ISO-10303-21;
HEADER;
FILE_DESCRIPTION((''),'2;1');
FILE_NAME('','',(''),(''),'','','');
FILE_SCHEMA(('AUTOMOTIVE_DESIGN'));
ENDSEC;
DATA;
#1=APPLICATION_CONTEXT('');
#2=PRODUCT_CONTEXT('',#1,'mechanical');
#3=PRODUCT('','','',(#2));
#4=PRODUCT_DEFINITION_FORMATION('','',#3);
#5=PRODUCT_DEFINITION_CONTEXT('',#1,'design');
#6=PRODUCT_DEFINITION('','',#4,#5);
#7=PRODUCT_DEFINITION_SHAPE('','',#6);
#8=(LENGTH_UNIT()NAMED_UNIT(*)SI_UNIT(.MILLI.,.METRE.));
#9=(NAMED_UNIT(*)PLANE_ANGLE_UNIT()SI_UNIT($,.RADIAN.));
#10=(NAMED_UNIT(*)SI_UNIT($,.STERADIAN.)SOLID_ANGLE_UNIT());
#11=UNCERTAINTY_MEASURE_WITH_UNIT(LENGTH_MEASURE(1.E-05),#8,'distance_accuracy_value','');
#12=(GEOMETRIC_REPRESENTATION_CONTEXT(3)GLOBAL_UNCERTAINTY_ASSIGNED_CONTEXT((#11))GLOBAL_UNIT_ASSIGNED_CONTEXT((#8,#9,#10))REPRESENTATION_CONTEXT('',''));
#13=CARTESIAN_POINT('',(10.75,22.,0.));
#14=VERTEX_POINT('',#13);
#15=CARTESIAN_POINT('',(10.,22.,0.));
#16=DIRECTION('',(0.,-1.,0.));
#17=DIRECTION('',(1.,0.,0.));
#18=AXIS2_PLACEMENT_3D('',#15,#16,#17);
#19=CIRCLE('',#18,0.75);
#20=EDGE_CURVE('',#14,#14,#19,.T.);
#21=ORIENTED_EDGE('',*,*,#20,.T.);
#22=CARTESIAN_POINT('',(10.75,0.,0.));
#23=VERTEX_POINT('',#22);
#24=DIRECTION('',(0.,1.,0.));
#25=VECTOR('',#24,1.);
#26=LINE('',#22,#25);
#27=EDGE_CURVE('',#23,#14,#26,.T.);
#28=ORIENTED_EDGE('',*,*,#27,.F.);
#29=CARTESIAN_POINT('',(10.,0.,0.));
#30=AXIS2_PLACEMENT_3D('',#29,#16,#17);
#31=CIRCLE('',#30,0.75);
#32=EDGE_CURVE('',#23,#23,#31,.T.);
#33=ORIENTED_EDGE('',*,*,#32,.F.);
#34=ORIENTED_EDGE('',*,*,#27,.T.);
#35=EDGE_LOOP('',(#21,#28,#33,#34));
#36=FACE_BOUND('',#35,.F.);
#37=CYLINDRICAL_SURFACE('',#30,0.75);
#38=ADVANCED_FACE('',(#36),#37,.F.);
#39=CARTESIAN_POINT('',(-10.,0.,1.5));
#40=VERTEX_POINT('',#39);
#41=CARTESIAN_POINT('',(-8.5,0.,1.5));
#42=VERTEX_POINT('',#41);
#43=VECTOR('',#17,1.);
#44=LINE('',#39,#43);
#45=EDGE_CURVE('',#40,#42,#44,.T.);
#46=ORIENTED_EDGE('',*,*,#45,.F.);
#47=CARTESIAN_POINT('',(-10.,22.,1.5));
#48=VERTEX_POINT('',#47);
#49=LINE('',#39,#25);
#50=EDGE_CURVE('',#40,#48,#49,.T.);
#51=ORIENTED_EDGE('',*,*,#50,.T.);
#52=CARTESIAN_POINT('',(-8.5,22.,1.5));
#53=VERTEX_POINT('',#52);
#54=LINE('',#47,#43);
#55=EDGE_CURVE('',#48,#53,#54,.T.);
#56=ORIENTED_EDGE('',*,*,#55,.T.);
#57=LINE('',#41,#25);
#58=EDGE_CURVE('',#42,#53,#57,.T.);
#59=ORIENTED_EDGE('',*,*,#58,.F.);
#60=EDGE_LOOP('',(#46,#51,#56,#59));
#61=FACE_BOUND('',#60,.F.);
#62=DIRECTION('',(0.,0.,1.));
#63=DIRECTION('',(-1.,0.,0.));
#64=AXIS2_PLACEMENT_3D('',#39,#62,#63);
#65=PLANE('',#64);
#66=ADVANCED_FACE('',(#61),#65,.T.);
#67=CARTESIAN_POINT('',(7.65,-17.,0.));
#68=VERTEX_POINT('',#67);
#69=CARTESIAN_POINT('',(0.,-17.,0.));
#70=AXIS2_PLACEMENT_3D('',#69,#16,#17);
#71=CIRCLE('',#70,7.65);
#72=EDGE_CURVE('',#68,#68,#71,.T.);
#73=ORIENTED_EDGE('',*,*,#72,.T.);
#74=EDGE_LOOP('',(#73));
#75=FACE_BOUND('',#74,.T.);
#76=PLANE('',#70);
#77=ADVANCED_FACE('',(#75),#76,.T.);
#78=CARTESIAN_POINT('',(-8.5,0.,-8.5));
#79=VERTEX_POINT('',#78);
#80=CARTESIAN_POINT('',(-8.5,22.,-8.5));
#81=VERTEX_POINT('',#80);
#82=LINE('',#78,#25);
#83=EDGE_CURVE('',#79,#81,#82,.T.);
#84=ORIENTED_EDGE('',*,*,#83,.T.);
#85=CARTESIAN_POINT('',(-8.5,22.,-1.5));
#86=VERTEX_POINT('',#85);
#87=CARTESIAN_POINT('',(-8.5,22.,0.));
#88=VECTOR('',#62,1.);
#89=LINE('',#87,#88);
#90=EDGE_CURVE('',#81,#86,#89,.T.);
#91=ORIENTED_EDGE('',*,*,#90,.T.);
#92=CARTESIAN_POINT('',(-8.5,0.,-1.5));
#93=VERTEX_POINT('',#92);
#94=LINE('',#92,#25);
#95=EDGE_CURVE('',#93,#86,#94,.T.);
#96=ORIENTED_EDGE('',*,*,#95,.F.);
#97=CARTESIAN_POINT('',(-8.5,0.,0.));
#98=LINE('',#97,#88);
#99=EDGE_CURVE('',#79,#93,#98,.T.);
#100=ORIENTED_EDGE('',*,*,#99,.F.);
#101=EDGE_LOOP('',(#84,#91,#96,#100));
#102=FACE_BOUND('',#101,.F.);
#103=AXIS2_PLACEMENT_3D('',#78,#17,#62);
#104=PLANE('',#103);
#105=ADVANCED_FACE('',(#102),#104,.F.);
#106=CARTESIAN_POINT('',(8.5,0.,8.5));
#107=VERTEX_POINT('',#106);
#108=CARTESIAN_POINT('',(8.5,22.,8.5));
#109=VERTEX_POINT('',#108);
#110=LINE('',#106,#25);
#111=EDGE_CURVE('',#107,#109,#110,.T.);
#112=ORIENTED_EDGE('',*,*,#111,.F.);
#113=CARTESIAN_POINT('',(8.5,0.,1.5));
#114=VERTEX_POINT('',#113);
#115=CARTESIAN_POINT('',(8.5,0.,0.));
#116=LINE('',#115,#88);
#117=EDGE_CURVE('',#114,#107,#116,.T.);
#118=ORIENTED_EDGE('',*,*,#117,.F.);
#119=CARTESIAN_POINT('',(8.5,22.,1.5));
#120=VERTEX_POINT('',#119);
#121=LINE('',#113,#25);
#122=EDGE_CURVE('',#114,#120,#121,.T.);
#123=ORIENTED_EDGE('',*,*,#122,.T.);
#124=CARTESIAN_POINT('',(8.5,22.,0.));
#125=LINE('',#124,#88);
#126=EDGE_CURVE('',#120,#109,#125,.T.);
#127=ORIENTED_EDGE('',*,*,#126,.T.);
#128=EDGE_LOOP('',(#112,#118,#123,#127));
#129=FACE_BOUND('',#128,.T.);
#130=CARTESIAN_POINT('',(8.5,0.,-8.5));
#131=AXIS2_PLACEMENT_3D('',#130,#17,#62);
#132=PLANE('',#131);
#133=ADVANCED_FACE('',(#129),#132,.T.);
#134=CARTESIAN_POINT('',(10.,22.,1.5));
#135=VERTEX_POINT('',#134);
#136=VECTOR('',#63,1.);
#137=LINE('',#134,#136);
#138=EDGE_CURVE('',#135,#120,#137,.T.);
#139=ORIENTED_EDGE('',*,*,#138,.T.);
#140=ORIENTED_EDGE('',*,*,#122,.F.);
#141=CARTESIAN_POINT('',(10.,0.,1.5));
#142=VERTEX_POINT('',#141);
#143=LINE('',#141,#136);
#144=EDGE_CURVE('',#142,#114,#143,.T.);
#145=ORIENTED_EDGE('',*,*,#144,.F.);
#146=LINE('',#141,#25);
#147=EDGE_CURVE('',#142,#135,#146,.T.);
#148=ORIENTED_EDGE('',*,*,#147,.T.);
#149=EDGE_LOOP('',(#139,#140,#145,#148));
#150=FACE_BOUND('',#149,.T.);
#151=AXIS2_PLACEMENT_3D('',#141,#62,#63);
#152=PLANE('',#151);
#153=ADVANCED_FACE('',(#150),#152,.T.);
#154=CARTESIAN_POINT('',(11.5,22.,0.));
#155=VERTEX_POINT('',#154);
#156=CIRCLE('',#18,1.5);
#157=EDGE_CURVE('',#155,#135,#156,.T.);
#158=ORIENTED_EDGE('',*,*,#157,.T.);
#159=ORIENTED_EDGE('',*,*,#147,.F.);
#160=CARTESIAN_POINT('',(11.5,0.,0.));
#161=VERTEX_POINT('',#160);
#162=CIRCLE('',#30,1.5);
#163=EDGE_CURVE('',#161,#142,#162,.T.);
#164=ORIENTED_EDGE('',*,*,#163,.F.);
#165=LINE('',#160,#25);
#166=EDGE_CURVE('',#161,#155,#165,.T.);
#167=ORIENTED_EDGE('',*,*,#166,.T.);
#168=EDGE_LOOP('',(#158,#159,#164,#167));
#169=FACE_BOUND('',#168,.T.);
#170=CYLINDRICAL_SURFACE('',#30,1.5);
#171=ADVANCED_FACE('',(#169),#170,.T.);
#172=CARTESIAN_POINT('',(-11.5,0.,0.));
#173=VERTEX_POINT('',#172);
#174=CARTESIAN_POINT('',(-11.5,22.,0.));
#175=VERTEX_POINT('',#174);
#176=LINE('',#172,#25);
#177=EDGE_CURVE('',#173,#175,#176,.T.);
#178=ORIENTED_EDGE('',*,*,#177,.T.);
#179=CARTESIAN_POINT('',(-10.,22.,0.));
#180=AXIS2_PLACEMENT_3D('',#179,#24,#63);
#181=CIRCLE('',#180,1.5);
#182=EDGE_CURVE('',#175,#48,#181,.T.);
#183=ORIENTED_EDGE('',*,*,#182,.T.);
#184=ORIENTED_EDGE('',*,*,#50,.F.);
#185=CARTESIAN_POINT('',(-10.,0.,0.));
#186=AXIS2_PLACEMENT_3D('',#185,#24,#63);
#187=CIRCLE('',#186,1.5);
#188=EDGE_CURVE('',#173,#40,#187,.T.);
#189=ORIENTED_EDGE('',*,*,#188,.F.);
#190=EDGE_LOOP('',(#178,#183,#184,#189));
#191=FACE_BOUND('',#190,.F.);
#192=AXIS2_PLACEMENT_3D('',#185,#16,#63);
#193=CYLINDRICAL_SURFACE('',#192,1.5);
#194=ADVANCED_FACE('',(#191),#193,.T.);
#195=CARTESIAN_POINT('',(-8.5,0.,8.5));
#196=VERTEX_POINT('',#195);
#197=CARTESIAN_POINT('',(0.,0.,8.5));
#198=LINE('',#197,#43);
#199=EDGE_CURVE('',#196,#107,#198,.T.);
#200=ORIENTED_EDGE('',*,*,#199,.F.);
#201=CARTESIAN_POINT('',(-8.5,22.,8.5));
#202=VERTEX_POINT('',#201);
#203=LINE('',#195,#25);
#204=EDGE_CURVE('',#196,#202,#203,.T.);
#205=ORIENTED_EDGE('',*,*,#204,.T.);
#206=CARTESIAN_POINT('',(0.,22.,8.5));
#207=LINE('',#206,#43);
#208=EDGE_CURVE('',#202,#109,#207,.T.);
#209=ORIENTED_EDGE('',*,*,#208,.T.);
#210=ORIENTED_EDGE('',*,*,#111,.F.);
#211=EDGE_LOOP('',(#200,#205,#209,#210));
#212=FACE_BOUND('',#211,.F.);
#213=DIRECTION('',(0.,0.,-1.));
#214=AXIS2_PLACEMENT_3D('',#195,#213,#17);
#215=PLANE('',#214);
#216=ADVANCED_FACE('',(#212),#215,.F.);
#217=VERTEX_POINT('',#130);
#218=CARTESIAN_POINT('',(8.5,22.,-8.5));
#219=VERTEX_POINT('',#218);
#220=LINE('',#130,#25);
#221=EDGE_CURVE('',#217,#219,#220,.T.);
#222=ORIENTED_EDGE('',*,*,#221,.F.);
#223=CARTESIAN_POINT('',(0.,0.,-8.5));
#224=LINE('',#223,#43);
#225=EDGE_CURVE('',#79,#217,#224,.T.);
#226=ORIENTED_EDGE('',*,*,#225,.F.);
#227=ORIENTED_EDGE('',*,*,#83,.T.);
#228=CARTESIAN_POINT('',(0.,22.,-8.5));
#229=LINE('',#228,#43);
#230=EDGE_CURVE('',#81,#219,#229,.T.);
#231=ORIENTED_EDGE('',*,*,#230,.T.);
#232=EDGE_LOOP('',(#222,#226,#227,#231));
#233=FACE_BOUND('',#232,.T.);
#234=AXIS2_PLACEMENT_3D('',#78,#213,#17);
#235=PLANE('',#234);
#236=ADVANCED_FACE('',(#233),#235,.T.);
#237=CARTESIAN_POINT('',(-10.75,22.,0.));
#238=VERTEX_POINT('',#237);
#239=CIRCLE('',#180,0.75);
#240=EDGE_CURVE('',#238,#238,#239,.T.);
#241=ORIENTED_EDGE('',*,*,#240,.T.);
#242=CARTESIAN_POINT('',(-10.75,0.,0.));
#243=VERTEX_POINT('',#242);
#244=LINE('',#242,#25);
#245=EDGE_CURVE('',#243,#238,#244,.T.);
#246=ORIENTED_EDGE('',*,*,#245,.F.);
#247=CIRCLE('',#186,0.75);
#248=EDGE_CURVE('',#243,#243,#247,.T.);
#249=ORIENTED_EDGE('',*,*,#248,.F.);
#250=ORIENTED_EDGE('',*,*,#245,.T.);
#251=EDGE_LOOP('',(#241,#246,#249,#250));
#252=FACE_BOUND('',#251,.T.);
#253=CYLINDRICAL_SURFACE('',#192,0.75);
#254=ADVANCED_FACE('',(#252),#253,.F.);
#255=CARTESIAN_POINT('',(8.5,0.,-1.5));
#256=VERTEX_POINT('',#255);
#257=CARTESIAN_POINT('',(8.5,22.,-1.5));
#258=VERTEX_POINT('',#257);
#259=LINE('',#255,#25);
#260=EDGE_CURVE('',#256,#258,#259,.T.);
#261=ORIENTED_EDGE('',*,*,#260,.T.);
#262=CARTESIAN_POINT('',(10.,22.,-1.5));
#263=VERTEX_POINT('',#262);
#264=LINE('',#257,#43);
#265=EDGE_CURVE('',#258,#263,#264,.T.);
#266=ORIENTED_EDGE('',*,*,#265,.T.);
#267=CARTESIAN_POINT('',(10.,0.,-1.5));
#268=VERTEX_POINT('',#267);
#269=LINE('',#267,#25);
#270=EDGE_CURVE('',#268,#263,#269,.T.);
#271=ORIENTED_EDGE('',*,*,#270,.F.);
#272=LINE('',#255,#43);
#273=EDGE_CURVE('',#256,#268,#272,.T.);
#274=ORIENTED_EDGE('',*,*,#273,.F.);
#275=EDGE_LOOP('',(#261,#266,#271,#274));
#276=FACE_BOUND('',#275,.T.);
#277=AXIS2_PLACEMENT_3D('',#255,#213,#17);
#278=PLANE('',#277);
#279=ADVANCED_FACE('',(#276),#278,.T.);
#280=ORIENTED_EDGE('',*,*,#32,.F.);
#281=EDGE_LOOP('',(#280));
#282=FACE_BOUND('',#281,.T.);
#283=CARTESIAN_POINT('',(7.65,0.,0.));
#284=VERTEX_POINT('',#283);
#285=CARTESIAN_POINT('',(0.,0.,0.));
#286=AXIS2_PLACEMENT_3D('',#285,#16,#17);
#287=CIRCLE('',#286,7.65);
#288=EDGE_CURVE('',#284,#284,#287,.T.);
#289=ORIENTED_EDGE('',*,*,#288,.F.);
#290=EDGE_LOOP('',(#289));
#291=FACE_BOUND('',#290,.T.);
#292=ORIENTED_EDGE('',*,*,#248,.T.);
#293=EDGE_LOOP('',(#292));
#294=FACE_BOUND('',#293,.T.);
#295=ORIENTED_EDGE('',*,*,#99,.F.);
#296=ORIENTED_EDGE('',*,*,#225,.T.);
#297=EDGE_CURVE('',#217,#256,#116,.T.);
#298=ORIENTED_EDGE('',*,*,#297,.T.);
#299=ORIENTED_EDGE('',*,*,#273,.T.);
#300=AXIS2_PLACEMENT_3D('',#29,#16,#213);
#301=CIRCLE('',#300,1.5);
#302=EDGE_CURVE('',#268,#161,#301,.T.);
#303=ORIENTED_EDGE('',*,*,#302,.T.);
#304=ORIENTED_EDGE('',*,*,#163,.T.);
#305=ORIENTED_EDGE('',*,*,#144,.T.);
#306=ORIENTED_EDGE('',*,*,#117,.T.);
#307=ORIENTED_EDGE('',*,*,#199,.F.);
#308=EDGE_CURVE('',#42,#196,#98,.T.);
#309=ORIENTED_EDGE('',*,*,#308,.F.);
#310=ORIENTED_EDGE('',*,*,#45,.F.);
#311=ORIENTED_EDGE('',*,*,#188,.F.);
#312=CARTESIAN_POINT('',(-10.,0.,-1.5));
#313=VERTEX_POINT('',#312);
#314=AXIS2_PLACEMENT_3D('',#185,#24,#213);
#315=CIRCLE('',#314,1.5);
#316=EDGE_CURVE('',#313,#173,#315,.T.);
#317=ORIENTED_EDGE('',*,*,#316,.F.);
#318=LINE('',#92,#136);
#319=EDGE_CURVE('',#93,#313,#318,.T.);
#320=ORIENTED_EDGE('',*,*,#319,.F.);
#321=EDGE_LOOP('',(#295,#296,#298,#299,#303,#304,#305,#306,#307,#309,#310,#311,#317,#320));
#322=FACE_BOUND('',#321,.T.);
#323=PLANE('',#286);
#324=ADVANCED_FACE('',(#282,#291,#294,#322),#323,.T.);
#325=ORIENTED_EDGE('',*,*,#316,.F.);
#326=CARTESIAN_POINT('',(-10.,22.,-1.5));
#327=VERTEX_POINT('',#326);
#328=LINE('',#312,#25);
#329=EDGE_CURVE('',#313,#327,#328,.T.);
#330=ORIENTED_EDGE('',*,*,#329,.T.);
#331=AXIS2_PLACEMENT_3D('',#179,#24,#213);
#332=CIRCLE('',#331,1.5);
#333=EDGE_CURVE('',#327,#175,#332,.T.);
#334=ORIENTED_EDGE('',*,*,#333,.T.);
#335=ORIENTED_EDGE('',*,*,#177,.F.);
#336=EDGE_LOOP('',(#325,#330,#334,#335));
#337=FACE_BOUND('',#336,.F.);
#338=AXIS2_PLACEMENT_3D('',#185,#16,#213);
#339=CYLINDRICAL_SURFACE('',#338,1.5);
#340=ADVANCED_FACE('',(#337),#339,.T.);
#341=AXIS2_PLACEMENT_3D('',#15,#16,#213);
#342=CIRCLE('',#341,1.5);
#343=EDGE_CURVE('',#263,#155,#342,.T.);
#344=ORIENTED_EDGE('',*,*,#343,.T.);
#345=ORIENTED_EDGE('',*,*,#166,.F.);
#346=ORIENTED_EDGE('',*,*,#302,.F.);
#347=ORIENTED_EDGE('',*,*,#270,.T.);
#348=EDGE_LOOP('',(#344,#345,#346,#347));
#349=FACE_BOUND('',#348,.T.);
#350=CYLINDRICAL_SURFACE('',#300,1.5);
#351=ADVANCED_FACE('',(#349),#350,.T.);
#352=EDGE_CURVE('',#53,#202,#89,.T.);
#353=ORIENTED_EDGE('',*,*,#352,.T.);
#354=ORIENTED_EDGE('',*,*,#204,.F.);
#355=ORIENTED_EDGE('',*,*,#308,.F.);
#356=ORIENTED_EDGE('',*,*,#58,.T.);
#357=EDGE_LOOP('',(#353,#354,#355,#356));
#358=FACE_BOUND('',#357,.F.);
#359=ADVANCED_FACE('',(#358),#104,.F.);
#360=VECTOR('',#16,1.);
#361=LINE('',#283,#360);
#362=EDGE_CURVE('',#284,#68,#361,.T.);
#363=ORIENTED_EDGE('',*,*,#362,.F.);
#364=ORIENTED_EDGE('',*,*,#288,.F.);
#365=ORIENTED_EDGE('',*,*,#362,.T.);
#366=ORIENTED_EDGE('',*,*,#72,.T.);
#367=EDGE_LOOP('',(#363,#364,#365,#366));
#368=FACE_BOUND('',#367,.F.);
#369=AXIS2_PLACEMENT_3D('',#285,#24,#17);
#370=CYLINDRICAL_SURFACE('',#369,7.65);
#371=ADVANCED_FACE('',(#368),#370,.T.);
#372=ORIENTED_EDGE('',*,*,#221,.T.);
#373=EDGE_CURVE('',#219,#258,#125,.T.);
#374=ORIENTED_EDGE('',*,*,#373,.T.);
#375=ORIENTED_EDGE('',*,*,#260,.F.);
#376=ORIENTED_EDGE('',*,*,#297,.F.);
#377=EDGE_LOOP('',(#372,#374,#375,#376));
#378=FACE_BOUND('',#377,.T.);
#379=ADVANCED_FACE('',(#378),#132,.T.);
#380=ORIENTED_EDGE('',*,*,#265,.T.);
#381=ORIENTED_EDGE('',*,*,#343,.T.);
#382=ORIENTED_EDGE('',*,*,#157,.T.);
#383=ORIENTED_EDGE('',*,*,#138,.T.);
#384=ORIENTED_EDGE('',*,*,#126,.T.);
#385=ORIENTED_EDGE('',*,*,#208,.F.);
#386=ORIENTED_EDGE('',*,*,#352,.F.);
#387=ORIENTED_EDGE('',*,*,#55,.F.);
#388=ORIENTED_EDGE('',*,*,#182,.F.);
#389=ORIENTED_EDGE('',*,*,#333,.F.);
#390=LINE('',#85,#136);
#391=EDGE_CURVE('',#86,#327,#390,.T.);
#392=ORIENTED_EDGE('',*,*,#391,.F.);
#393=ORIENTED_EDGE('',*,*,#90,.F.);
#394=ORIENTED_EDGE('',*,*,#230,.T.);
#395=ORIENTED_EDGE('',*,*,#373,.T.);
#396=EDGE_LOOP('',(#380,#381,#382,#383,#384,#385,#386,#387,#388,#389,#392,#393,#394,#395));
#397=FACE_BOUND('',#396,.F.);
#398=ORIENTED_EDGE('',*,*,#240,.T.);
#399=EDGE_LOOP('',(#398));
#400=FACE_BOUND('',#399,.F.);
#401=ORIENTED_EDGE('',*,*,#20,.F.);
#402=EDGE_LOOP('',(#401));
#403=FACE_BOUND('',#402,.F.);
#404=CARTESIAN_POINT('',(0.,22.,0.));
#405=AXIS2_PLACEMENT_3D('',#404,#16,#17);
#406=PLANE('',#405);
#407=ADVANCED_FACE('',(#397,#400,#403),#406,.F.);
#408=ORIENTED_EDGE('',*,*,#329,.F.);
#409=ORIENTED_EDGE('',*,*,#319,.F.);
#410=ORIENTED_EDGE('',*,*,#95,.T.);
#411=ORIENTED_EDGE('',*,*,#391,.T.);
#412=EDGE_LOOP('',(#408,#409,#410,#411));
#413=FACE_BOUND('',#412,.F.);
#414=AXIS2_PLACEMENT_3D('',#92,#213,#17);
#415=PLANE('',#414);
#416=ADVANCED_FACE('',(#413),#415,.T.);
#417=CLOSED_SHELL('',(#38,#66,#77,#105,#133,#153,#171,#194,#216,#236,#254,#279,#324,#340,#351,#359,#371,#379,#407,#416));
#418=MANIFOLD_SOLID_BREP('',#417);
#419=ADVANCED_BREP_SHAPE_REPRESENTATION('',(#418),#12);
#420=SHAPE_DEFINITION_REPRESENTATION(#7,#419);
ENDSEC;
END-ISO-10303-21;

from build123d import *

# Parameters (mm, degrees)
F0_R     = 7.65
F1_DEPTH = 17
F2_W     = 17
F2_H     = 17
F3_DEPTH = 22
F4_R     = 0.75
F5_DEPTH = 22


# Not quite as in the source:
# - a pattern or mirror of a feature is missing from the dataset's text; its kind, count and spacing are read off the source's solid


with BuildPart() as f1:
    # F0 (on Front) → F1 (new body)
    with BuildSketch(Plane.XZ):
        Circle(F0_R)
    extrude(amount=F1_DEPTH)

    # F2 (on Front) → F3 (join)
    with BuildSketch(Plane.XZ):
        Rectangle(F2_W, F2_H)
    extrude(amount=-F3_DEPTH)

    # F4 (on Front) → F5 (join)
    with BuildSketch(Plane.XZ):
        with BuildLine():
            ThreePointArc((10, -1.5), (11.0606601718, -1.0606601718), (11.5, 0))
            ThreePointArc((11.5, 0), (11.0606601718, 1.0606601718), (10, 1.5))
            ThreePointArc((10, 1.5), (8.9393398282, 1.0606601718), (8.5, 0))
            ThreePointArc((8.5, 0), (8.9393398282, -1.0606601718), (10, -1.5))
        make_face()
        with Locations((10, 0)):
            Circle(F4_R, mode=Mode.SUBTRACT)
        with BuildLine():
            ThreePointArc((8.5, 0), (8.9393398282, 1.0606601718), (10, 1.5))
            Line((10, 1.5), (8.5, 1.5))
            Line((8.5, 1.5), (8.5, 0))
        make_face()
        with BuildLine():
            Line((8.5, -1.5), (10, -1.5))
            ThreePointArc((10, -1.5), (8.9393398282, -1.0606601718), (8.5, 0))
            Line((8.5, 0), (8.5, -1.5))
        make_face()
    f5 = extrude(amount=-F5_DEPTH)

    # F5_copies: F5 across plane
    add(f5.mirror(Plane(origin=(0, 0, 0), x_dir=(0, 0, -1), z_dir=(-1, 0, 0))))


solid = f1.part
